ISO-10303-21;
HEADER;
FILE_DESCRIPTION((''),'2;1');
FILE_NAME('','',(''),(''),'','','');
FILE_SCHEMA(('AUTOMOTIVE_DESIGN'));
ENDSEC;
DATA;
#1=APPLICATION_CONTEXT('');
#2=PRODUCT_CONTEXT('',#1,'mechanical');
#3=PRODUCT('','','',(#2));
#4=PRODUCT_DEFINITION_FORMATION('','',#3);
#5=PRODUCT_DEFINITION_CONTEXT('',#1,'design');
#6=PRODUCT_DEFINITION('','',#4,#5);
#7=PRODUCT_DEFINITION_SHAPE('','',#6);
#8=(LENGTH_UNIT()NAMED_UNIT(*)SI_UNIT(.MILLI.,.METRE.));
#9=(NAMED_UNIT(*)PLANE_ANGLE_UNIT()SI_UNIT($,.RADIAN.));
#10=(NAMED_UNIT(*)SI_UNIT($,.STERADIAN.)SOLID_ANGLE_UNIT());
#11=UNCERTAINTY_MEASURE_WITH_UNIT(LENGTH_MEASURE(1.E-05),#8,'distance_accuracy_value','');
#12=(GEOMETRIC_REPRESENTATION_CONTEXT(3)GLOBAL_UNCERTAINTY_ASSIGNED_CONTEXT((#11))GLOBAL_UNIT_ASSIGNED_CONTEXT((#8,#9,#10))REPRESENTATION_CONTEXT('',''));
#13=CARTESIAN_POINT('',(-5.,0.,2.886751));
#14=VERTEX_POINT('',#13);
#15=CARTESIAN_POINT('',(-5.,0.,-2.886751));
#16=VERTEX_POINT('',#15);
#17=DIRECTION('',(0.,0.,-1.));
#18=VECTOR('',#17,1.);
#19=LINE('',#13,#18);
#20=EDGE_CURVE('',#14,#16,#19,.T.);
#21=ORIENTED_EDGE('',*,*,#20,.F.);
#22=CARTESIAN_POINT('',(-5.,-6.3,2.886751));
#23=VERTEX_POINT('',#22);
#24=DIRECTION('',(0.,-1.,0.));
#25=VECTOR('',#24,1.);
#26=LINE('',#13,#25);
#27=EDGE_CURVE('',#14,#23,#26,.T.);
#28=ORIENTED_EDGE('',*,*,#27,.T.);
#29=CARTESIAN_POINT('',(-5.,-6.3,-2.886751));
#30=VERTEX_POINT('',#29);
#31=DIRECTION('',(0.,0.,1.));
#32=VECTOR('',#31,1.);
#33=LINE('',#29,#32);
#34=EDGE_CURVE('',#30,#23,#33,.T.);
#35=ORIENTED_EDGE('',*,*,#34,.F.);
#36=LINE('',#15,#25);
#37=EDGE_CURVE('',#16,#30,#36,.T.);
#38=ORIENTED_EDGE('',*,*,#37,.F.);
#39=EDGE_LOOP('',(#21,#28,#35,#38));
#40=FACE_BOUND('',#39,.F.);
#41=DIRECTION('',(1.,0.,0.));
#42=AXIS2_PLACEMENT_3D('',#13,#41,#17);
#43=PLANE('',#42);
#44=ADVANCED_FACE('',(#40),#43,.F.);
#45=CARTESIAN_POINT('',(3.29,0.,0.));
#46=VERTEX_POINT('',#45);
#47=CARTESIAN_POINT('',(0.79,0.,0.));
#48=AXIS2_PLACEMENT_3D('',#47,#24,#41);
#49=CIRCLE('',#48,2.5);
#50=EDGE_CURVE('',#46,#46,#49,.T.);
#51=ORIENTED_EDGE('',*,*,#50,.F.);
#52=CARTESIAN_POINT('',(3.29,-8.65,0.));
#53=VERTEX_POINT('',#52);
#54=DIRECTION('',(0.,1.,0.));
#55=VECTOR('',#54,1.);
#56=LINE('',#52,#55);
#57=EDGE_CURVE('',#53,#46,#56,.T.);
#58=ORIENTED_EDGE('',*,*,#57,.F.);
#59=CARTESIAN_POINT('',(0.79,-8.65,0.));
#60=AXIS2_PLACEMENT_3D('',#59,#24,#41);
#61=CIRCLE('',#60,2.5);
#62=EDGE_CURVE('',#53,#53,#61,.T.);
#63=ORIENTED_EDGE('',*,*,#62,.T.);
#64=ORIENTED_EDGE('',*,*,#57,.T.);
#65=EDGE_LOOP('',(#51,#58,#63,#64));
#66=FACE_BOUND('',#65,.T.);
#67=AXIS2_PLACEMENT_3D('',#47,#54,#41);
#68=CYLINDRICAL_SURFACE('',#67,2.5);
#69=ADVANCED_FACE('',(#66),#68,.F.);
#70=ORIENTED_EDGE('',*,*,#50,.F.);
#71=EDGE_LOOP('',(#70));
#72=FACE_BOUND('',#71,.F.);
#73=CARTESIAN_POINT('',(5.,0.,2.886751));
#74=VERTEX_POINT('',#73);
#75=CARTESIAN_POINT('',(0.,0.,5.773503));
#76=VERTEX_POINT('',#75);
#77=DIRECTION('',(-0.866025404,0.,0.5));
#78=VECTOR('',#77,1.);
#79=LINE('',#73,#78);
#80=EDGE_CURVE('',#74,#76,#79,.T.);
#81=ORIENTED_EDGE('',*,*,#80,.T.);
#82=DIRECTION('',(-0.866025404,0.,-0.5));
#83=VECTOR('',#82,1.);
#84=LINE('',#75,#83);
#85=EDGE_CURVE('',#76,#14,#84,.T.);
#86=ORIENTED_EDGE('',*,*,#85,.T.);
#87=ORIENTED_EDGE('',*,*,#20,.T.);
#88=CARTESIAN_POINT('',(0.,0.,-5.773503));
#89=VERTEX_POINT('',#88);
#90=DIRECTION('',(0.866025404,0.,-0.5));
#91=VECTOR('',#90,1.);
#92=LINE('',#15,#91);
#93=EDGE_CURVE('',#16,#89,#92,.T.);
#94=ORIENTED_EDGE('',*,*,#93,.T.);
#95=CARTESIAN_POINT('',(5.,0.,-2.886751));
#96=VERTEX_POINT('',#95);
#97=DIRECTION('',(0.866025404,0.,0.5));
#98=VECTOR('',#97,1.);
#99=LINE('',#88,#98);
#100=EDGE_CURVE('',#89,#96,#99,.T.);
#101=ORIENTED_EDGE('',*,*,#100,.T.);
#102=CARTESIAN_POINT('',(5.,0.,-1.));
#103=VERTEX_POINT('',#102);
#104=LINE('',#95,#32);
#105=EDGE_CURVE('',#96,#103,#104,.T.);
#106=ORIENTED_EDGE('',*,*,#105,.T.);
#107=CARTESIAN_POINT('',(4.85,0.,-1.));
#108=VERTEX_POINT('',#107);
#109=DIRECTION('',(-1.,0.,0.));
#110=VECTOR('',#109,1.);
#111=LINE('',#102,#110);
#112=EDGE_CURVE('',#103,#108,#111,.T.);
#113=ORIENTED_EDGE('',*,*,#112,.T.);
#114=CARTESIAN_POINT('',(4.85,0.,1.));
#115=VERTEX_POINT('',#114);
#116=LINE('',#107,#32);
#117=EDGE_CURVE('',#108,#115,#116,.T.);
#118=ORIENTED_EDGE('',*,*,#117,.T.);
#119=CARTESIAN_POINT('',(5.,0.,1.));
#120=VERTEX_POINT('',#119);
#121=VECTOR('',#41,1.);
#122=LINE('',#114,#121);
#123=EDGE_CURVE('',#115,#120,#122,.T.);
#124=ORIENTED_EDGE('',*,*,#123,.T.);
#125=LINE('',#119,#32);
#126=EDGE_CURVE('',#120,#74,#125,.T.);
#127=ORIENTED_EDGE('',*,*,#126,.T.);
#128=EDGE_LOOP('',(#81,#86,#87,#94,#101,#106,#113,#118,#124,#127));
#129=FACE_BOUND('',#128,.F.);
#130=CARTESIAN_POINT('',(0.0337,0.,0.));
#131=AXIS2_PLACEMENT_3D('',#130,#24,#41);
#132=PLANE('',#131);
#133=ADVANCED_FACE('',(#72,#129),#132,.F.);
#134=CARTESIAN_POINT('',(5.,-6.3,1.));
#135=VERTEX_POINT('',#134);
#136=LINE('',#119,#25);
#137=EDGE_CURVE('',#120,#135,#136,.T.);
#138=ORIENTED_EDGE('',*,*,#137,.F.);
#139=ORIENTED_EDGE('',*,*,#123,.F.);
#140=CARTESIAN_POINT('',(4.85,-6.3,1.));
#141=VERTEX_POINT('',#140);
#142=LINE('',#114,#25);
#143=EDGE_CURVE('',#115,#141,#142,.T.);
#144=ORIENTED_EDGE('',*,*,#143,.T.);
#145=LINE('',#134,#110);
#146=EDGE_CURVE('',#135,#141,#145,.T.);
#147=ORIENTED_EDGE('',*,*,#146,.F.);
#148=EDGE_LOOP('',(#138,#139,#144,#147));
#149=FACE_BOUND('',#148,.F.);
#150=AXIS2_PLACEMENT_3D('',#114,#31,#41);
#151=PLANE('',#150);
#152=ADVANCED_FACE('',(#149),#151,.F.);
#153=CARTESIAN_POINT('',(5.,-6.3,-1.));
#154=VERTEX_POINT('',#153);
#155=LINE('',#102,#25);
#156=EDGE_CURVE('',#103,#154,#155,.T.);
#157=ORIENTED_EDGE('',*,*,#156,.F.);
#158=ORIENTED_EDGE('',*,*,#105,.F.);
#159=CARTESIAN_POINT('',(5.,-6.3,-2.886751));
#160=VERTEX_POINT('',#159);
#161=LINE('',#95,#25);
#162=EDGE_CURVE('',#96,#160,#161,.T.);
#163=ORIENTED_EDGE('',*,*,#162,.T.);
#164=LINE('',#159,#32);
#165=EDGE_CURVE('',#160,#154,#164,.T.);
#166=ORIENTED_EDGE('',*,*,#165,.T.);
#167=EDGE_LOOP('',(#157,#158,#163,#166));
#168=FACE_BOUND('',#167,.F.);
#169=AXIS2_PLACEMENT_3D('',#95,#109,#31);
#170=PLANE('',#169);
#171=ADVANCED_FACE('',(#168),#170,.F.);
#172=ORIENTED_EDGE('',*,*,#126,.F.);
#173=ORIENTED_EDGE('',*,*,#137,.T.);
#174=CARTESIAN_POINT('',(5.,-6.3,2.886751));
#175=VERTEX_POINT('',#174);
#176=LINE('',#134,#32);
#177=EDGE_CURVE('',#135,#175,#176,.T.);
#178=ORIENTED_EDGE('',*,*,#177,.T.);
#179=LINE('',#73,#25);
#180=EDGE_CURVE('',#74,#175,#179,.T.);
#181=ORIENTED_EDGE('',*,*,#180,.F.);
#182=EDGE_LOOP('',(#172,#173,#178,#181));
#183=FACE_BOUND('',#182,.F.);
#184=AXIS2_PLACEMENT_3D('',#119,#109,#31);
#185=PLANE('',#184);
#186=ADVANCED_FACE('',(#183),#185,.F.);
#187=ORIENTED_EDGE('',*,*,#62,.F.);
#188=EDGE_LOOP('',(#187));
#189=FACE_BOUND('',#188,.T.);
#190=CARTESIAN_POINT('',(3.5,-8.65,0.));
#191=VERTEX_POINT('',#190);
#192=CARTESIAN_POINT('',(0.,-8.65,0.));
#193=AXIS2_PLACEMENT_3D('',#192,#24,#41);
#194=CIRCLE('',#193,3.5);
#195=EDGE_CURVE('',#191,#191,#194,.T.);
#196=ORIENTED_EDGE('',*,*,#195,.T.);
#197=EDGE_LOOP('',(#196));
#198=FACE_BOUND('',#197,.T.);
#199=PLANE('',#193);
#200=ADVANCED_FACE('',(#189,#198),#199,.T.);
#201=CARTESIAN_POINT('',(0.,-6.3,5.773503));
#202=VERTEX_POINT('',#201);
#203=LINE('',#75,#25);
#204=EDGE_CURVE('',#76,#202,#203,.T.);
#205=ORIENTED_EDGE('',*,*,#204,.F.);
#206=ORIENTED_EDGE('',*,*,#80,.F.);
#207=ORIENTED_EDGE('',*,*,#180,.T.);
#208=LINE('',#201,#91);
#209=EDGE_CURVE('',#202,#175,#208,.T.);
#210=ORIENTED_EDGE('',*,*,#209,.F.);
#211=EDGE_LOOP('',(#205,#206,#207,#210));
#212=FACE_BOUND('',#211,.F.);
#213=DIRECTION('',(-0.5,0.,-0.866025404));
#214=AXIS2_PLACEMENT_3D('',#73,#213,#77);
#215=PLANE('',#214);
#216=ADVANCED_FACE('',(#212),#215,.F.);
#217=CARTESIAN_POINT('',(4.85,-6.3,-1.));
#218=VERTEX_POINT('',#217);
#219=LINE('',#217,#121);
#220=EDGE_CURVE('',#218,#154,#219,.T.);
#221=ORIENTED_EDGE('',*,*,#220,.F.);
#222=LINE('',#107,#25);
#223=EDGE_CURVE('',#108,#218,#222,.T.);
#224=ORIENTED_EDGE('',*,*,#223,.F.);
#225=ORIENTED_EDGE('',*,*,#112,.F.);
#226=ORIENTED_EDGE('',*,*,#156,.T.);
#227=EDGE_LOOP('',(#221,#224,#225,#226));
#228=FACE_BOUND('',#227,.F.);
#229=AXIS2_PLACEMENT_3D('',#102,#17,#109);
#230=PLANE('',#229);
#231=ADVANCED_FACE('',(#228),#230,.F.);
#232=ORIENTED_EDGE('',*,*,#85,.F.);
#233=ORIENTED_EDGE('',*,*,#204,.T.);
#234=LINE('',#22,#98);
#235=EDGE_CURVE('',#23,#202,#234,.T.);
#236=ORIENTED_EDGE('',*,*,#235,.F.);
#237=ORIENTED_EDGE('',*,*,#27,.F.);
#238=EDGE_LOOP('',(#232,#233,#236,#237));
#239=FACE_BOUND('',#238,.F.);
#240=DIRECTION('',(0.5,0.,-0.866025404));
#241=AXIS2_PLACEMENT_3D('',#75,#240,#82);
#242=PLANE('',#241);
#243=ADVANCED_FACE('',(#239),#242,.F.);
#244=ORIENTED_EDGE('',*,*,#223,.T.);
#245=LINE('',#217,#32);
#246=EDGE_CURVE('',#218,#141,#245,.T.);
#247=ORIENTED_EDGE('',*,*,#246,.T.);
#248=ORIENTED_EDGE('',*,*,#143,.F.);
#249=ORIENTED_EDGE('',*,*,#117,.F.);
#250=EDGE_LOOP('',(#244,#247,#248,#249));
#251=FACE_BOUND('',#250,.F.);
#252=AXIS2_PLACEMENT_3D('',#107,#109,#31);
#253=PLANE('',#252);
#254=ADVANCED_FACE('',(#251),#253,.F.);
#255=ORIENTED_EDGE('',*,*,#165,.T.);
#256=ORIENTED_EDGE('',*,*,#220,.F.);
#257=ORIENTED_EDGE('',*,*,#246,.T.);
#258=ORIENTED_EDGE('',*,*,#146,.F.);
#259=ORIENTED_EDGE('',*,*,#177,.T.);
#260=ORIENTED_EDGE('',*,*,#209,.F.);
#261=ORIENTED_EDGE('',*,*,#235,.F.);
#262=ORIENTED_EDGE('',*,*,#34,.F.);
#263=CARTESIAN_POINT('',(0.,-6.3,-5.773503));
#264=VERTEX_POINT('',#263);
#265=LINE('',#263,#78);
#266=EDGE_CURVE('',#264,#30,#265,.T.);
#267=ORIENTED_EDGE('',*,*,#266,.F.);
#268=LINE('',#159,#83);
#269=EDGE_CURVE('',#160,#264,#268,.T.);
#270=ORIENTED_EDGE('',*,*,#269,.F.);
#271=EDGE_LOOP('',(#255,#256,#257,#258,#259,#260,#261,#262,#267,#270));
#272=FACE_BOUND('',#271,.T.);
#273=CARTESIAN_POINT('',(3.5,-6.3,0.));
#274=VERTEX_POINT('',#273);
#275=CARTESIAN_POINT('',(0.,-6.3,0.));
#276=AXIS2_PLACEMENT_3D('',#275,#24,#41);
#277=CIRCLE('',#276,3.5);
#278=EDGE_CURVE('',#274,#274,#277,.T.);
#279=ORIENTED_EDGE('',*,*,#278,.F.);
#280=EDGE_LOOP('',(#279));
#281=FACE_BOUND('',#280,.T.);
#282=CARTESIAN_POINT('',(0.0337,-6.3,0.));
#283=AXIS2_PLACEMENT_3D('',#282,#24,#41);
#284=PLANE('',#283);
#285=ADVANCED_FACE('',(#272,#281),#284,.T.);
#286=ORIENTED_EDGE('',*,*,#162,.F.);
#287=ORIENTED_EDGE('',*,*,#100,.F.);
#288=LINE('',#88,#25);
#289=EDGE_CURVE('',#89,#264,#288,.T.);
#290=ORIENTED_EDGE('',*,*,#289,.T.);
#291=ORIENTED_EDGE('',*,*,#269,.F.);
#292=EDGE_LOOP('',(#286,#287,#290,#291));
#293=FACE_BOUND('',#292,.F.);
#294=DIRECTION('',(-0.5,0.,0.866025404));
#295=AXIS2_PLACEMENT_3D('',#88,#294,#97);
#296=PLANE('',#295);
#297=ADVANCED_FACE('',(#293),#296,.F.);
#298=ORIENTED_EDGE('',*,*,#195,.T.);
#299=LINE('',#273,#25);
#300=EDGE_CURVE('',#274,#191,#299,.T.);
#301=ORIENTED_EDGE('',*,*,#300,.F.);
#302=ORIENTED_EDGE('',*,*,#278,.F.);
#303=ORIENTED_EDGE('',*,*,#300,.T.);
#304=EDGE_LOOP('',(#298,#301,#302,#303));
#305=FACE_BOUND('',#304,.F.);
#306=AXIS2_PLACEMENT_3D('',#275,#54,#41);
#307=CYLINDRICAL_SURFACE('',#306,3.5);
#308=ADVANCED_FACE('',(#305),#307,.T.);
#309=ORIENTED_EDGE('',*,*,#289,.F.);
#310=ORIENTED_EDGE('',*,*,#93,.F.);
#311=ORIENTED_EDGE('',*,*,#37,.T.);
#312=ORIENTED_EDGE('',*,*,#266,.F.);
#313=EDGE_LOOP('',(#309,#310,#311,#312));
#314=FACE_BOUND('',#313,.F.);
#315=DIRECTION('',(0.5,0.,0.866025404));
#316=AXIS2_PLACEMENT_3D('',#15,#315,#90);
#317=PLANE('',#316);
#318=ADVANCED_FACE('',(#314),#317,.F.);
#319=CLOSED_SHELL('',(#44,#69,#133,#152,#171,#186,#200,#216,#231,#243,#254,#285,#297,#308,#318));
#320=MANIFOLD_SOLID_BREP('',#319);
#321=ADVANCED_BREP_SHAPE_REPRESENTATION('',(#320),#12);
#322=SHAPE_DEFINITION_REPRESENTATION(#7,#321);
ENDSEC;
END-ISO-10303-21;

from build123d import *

# Parameters (mm, degrees)
F0_R     = 2.5
F1_DEPTH = 6.3
F3_R     = 3.5
F4_DEPTH = 2.35
F5_DEPTH = 8.65
F0_W     = 0.15
F0_H     = 2
F8_DEPTH = 22


# Not quite as in the source:
# - an extrude ends at something that could not be found from the text; its depth is read off the source's solid
# - a feature names something its author has since deleted; it is built from what else it names


with BuildPart() as f1:
    # F0 (on Front) → F1 (new body)
    with BuildSketch(Plane.XZ):
        Polygon((5, 1), (5, 2.8867513459), (0, 5.7735026919), (-5, 2.8867513459), (-5, -2.8867513459), (0, -5.7735026919), (5, -2.8867513459), (5, -1), (4.85, -1), (4.85, 1), align=None)
        with Locations((0.79, 0)):
            Circle(F0_R, mode=Mode.SUBTRACT)
    extrude(amount=F1_DEPTH)

    # F3 (on offset) → F4 (join)
    with BuildSketch(Plane.XZ.offset(6.3)):
        Circle(F3_R)
    extrude(amount=F4_DEPTH)

    # F0 (on Front) → F5 (cut, through all)
    with BuildSketch(Plane.XZ):
        with Locations((0.79, 0)):
            Circle(F0_R)
    extrude(amount=F5_DEPTH, mode=Mode.SUBTRACT)

    # F6 (on Top) → F7 (revolve, cut)
    with BuildSketch(Plane.XY):
        Polygon((-6.0966597098, -6.5938490836), (-5, -6.3), (-6.0966597098, -6.3), align=None)
    revolve(axis=Axis((0, -6.5372320823, 0), (0, -1, 0)), mode=Mode.SUBTRACT)

    # F0 (on Front) → F8 (cut, through all)
    with BuildSketch(Plane.XZ):
        with Locations((4.925, 0)):
            Rectangle(F0_W, F0_H)
    extrude(amount=-F8_DEPTH, mode=Mode.SUBTRACT)


solid = f1.part
